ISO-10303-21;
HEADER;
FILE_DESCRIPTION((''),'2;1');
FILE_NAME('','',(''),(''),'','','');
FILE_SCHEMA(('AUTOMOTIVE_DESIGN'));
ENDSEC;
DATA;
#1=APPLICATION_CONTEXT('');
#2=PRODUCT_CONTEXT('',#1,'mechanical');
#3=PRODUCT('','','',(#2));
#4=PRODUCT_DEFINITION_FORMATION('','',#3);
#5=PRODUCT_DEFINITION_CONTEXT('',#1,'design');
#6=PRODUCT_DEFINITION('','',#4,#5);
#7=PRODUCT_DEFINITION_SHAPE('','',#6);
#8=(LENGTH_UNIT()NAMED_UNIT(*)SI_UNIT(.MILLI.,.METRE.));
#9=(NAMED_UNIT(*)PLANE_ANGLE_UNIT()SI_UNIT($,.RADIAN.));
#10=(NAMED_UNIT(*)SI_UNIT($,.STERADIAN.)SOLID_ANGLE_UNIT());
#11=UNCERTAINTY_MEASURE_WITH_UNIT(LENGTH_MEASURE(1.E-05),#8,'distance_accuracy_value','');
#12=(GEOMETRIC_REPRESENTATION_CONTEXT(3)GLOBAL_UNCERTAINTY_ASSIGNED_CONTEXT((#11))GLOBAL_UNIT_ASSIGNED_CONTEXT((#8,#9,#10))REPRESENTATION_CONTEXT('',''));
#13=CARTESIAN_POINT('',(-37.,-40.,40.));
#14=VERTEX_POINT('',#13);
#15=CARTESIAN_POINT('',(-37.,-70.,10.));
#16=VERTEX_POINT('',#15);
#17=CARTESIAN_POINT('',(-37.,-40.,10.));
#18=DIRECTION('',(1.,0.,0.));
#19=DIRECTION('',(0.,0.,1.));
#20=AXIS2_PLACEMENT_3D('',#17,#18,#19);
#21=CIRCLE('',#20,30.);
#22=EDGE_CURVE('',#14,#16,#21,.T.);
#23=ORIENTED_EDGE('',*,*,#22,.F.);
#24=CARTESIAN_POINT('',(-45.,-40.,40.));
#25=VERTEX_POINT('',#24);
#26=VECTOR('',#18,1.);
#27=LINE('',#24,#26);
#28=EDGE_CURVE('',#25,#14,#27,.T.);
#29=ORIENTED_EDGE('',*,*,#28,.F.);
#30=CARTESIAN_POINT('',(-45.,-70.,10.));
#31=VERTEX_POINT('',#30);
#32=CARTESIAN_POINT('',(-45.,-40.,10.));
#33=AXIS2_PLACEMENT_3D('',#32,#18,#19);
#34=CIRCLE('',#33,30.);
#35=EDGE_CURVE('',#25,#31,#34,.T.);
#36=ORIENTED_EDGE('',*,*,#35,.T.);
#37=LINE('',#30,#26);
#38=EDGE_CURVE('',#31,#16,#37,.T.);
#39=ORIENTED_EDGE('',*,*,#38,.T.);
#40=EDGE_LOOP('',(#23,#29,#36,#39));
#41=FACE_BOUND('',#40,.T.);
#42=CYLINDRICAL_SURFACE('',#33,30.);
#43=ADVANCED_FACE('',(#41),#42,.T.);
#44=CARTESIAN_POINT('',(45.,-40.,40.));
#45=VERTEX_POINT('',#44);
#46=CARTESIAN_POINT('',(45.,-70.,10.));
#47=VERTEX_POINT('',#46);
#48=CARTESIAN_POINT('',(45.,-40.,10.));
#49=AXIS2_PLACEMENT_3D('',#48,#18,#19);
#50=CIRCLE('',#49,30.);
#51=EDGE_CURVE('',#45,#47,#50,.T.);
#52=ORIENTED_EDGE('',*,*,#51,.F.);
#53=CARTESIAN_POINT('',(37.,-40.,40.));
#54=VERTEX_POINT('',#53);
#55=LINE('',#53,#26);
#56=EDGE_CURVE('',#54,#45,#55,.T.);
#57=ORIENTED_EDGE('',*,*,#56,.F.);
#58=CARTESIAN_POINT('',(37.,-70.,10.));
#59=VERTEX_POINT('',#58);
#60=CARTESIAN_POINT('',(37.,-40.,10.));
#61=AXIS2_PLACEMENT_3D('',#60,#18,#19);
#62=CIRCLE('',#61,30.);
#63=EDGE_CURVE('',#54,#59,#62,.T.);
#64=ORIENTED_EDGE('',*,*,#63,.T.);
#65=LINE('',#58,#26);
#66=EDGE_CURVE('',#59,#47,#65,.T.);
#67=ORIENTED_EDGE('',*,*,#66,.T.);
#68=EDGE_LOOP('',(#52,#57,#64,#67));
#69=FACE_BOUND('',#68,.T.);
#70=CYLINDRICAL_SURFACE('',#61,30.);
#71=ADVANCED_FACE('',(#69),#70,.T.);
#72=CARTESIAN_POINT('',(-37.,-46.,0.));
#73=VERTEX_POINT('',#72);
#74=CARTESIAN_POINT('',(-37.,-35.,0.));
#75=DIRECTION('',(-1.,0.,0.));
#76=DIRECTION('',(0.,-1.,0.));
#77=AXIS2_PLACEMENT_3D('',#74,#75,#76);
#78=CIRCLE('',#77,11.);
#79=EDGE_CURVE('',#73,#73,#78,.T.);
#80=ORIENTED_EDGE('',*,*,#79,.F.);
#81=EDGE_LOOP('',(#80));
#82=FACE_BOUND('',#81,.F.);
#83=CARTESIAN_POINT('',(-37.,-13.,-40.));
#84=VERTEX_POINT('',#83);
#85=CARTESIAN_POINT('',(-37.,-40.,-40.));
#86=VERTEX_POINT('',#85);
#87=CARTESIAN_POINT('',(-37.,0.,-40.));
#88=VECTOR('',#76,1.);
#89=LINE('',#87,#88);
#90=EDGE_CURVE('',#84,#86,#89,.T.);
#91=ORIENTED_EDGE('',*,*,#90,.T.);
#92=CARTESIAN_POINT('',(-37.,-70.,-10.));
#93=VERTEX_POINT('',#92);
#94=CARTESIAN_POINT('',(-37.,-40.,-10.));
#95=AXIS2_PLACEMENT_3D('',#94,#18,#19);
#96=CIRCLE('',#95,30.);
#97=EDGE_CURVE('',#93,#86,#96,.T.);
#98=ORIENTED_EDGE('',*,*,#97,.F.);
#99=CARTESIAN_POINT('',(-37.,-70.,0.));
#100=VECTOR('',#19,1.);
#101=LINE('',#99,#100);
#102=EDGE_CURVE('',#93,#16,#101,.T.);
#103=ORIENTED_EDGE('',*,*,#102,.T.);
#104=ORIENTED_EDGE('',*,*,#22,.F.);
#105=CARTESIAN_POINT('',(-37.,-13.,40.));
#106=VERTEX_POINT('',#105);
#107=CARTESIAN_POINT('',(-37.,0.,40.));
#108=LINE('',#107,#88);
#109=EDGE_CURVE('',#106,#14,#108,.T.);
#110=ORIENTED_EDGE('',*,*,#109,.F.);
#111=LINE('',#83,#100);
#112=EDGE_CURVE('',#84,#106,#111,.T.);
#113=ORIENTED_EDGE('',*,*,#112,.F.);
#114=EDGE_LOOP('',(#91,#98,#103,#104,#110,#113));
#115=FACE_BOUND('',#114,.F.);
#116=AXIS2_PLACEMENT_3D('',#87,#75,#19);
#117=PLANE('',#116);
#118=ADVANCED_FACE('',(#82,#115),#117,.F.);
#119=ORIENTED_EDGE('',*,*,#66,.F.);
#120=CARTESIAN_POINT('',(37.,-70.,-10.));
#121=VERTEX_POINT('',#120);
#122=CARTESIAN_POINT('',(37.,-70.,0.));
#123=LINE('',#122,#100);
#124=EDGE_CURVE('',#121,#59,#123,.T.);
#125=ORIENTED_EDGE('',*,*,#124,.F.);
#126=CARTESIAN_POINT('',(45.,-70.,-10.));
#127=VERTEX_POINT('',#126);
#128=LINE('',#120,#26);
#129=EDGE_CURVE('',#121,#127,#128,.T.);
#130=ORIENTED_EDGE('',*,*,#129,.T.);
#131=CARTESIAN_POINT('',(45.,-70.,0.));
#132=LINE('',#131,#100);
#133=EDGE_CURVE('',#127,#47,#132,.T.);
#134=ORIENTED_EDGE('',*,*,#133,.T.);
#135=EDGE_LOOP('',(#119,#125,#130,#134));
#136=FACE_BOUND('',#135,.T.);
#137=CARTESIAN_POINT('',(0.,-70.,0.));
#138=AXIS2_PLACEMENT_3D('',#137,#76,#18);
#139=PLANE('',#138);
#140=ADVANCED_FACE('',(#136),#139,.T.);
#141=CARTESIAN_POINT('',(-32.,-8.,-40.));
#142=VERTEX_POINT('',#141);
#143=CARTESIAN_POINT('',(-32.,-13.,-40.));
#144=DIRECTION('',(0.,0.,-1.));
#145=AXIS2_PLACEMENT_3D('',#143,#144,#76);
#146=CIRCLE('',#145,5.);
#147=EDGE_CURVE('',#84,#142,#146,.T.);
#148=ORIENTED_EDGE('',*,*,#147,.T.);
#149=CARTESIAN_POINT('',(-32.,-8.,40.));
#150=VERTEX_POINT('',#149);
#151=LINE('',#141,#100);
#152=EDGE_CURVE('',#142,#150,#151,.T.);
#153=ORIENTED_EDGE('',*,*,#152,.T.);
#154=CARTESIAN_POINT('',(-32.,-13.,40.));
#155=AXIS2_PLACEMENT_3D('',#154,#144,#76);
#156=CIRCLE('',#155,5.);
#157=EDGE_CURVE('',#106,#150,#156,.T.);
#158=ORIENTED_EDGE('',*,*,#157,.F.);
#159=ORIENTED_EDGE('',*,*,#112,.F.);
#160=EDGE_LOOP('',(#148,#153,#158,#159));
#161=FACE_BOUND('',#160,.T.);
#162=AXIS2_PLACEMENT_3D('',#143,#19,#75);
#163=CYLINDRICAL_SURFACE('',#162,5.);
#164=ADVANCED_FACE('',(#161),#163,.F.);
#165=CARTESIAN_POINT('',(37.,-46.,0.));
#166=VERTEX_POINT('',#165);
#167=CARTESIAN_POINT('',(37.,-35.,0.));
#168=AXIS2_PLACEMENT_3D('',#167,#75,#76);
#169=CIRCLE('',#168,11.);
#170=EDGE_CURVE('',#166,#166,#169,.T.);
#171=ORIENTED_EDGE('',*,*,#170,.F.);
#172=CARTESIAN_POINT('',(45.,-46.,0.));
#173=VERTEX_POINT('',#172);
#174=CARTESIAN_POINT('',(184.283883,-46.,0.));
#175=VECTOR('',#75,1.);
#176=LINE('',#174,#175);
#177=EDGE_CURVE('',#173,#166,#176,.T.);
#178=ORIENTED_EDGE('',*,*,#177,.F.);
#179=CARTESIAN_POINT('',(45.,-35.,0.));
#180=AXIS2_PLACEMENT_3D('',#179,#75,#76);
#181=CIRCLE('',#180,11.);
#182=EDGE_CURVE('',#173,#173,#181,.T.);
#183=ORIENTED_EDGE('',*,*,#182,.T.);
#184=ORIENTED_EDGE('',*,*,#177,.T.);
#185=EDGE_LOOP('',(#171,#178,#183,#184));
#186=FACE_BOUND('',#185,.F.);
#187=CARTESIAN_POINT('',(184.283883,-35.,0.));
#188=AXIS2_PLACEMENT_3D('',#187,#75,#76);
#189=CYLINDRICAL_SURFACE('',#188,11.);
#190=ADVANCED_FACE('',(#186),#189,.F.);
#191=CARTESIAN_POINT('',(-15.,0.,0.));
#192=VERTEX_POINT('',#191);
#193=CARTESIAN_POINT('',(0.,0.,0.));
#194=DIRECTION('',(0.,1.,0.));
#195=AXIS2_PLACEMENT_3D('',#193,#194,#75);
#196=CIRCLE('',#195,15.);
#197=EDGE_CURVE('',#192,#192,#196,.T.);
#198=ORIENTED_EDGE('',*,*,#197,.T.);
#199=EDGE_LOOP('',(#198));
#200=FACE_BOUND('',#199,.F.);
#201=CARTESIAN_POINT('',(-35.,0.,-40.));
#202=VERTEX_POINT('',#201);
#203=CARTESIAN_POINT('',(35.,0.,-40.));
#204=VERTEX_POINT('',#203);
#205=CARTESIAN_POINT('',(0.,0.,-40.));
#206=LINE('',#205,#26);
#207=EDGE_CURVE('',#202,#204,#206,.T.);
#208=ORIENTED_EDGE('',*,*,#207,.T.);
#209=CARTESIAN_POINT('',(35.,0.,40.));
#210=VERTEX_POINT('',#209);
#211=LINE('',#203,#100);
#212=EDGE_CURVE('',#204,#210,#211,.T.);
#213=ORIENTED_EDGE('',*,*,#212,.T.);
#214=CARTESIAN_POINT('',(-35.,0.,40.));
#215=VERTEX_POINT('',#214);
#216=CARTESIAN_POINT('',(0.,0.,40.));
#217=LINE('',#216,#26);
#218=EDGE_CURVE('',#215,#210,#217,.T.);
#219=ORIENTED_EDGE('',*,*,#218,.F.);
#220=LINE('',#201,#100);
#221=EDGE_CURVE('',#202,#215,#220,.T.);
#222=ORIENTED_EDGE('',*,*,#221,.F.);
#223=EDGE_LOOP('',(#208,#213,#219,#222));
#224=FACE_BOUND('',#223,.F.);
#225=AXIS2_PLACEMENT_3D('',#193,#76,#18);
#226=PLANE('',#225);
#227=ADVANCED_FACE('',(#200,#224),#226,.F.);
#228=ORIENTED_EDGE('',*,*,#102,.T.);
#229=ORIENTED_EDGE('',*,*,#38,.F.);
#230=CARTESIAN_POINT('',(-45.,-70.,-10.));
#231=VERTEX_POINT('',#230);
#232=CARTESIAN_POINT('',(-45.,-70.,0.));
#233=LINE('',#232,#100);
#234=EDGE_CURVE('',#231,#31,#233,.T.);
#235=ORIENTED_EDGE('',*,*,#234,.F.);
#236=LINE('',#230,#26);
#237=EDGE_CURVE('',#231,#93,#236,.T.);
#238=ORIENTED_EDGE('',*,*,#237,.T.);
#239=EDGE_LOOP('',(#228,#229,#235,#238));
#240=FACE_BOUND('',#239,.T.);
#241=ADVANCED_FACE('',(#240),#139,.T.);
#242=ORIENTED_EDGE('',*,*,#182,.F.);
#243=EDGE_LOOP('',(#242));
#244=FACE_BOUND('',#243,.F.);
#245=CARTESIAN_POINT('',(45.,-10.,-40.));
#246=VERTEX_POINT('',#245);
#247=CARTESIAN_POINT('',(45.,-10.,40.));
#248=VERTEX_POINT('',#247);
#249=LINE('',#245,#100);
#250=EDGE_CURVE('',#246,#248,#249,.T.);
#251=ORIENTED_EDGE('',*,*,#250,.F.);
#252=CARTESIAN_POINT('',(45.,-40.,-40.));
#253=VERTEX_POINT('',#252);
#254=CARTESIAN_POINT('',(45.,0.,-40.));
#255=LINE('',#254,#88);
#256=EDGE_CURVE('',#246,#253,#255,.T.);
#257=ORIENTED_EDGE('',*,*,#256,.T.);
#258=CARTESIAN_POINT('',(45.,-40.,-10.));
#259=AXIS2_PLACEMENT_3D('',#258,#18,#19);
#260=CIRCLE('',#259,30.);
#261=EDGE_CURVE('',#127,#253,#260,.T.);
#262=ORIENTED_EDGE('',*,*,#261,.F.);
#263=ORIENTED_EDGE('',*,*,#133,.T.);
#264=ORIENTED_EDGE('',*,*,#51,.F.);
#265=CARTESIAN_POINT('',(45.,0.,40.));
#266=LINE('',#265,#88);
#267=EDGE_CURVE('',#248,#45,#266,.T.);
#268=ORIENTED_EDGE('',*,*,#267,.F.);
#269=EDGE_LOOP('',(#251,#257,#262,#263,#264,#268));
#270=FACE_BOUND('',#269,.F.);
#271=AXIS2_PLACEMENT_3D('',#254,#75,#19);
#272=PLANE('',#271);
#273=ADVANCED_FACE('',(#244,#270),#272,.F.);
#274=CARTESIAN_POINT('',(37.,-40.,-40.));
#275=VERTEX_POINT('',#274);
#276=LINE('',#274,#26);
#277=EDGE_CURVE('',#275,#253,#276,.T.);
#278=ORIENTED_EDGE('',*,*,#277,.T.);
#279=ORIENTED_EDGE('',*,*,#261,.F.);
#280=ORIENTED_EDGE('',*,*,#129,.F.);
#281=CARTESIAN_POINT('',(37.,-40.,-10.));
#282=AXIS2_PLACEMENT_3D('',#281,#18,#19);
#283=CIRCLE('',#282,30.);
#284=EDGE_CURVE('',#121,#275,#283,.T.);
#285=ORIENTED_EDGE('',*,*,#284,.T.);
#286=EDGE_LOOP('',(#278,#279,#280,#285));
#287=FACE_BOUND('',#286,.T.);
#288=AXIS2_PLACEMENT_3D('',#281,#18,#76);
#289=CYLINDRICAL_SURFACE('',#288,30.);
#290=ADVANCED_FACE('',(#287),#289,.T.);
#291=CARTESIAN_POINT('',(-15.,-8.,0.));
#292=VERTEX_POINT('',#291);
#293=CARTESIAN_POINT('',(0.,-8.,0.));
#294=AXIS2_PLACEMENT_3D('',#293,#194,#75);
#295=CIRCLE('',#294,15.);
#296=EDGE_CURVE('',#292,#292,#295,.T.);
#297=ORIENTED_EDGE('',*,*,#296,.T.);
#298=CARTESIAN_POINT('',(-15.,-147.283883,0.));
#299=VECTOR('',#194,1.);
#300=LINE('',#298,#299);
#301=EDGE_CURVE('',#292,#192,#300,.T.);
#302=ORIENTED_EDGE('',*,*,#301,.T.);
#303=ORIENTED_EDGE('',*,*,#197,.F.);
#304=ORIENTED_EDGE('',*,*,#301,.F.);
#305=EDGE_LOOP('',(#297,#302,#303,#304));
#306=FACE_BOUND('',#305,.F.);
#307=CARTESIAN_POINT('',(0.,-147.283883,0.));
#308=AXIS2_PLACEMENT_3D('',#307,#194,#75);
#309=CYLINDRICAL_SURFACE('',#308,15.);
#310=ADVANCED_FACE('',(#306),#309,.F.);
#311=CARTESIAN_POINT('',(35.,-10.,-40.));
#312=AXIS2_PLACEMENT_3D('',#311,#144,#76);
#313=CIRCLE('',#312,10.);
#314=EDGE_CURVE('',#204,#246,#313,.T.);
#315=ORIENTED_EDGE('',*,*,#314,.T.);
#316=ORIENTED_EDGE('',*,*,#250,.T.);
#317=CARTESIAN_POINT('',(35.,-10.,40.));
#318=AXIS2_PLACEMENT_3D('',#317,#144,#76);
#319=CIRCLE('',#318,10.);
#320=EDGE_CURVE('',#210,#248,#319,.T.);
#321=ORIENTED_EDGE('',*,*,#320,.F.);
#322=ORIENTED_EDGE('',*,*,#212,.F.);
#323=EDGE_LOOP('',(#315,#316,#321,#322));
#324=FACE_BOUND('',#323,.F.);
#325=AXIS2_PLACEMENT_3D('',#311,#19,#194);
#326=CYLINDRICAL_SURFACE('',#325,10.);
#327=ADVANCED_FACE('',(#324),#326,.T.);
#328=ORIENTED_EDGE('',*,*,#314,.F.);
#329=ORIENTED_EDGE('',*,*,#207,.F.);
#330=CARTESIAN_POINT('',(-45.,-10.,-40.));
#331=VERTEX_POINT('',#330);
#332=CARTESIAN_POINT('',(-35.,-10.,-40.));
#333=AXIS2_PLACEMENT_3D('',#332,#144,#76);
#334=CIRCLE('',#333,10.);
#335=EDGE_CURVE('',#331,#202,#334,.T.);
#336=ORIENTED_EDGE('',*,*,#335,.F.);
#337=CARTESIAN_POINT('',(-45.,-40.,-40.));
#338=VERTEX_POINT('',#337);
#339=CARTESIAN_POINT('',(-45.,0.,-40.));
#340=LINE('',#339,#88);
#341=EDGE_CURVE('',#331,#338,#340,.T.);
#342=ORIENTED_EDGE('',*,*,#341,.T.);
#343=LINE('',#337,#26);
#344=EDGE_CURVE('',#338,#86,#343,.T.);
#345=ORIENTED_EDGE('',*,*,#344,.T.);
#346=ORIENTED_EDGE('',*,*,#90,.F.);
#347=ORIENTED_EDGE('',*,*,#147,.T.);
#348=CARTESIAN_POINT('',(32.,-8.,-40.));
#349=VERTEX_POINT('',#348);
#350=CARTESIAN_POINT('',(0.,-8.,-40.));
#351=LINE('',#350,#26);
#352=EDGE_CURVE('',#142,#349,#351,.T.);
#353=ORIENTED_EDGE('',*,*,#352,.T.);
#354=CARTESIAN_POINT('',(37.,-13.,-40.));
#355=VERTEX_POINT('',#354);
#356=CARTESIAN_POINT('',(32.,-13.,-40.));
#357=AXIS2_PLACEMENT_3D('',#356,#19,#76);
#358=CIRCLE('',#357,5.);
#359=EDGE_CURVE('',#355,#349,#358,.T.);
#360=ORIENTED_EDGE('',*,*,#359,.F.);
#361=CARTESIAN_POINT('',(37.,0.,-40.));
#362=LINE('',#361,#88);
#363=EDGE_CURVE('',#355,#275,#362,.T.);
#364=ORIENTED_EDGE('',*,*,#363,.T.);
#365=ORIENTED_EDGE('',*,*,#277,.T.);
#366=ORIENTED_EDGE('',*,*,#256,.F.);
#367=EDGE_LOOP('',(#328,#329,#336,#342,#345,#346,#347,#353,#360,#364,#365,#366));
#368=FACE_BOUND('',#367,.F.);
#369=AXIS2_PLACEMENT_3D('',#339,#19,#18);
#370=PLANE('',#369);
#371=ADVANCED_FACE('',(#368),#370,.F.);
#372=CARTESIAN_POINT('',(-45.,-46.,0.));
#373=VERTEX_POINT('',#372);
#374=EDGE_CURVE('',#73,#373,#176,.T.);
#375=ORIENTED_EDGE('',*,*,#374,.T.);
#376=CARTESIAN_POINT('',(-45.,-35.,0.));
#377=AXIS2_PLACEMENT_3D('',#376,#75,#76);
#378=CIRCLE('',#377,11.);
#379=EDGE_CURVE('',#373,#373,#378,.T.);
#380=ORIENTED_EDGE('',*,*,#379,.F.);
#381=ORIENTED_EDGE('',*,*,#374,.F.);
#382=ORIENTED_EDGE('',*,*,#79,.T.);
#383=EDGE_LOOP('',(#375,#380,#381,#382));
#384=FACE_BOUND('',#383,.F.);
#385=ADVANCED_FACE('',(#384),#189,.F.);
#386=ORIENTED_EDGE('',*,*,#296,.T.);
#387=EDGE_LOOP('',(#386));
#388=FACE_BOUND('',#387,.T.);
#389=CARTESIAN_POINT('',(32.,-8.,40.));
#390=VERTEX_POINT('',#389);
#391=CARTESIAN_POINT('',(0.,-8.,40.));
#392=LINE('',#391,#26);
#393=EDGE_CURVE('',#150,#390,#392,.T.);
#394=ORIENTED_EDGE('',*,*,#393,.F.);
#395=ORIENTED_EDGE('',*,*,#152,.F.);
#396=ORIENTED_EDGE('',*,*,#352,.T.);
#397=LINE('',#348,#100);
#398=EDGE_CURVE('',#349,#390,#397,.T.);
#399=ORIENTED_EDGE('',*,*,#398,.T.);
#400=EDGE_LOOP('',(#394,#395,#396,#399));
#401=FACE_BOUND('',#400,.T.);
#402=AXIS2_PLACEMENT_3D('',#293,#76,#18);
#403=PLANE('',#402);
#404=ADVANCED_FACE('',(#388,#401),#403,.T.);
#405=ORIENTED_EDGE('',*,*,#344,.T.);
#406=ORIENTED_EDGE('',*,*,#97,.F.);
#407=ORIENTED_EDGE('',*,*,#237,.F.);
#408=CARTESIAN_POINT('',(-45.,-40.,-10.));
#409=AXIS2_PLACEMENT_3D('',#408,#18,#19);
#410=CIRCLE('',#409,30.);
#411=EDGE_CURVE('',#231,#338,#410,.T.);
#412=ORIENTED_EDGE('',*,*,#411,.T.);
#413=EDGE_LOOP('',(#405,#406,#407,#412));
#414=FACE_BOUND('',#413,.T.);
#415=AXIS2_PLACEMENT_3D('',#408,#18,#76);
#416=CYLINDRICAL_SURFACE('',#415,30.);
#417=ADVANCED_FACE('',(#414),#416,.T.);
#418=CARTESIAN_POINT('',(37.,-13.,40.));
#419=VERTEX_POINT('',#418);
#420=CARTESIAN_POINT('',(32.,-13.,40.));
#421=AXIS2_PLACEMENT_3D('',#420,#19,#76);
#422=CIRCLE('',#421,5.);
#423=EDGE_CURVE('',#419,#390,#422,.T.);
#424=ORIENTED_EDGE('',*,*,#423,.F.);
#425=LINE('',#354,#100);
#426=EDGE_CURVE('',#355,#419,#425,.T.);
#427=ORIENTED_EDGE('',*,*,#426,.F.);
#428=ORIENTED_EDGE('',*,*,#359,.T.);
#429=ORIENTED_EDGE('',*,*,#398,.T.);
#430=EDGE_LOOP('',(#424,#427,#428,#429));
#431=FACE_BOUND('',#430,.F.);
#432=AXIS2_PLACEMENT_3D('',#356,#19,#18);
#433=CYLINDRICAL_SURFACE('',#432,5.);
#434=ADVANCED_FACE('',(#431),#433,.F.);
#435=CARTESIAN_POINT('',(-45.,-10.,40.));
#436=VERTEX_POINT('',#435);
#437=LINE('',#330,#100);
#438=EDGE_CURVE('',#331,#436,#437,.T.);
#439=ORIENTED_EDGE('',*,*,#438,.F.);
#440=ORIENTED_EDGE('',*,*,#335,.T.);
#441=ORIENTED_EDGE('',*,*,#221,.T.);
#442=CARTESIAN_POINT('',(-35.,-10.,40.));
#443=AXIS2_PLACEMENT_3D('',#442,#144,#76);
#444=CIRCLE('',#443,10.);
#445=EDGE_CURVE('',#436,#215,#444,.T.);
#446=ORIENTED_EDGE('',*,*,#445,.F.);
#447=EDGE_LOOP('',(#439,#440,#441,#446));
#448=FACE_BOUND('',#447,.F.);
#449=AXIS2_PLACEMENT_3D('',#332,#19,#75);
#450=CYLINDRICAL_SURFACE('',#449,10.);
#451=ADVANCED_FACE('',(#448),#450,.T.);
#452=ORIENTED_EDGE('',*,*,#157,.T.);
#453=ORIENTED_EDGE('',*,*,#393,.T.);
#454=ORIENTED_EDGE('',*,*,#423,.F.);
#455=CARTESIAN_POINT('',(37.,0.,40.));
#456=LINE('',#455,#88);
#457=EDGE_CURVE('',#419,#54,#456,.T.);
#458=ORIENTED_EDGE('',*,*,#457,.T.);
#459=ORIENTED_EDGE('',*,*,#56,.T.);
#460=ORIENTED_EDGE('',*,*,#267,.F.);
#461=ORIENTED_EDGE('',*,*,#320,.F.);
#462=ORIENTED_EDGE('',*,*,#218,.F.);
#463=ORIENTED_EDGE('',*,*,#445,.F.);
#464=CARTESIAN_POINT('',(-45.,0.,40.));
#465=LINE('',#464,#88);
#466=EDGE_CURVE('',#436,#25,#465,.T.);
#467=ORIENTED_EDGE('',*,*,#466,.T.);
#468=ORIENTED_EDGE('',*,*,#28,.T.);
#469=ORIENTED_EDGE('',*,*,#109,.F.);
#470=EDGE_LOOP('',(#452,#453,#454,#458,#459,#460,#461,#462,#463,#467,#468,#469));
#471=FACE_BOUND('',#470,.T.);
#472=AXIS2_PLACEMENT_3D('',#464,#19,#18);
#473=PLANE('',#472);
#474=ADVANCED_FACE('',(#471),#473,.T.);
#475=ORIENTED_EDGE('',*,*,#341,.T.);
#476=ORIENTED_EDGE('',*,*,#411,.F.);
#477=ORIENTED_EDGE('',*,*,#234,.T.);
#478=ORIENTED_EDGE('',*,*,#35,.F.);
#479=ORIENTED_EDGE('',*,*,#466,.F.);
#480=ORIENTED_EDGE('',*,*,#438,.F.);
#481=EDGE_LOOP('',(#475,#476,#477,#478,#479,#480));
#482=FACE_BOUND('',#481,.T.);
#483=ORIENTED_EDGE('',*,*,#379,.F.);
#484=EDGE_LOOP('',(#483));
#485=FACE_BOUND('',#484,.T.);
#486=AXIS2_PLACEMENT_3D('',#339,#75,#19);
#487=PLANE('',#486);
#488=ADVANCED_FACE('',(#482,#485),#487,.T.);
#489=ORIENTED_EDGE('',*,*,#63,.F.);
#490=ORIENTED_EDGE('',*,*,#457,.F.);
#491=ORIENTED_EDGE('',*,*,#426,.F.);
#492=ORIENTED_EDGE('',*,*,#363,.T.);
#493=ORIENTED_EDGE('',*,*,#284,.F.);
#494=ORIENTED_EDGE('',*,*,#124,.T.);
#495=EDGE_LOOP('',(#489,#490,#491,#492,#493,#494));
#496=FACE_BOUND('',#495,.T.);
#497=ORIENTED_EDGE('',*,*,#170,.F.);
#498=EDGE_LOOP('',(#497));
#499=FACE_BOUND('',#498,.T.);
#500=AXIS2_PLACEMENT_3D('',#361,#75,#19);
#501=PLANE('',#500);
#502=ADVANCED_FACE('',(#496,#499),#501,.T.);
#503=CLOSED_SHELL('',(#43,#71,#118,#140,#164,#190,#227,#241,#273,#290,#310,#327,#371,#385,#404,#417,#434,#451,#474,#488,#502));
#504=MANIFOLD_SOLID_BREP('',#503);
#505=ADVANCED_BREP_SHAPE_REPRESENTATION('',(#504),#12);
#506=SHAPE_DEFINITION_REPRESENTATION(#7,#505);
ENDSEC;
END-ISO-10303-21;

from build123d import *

# Parameters (mm, degrees)
F0_W     = 90
F0_H     = 80
F1_DEPTH = 70
F2_T     = -8
F3_R     = 5
F4_R     = 10
F5_R     = 30
F7_D     = 30
F9_D     = 22


with BuildPart() as f1:
    # F0 (on Front) → F1 (new body)
    with BuildSketch(Plane.XZ):
        Rectangle(F0_W, F0_H)
    extrude(amount=F1_DEPTH)

    # F2
    f2_openings = [f1.faces().sort_by_distance(p)[0] for p in [
        (0, -70, 0),
        (0, -35, 40),
        (0, -35, -40),
    ]]
    offset(amount=F2_T, openings=f2_openings)

    # F3
    f3_edges = [f1.edges().sort_by_distance(p)[0] for p in [
        (-37, -8, 0),
        (37, -8, 0),
    ]]
    fillet(f3_edges, radius=F3_R)

    # F4
    f4_edges = [f1.edges().sort_by_distance(p)[0] for p in [
        (-45, 0, 0),
        (45, 0, 0),
    ]]
    fillet(f4_edges, radius=F4_R)

    # F5
    f5_edges = [f1.edges().sort_by_distance(p)[0] for p in [
        (41, -70, 40),
        (-41, -70, 40),
        (41, -70, -40),
        (-41, -70, -40),
    ]]
    fillet(f5_edges, radius=F5_R)

    # F7 (through all)
    with Locations(Plane.XZ.offset(8)):
        with Locations((0, 0)):
            Hole(F7_D / 2)

    # F9 (through all)
    with Locations(Plane.YZ.offset(45)):
        with Locations((-35, 0)):
            Hole(F9_D / 2)


solid = f1.part
